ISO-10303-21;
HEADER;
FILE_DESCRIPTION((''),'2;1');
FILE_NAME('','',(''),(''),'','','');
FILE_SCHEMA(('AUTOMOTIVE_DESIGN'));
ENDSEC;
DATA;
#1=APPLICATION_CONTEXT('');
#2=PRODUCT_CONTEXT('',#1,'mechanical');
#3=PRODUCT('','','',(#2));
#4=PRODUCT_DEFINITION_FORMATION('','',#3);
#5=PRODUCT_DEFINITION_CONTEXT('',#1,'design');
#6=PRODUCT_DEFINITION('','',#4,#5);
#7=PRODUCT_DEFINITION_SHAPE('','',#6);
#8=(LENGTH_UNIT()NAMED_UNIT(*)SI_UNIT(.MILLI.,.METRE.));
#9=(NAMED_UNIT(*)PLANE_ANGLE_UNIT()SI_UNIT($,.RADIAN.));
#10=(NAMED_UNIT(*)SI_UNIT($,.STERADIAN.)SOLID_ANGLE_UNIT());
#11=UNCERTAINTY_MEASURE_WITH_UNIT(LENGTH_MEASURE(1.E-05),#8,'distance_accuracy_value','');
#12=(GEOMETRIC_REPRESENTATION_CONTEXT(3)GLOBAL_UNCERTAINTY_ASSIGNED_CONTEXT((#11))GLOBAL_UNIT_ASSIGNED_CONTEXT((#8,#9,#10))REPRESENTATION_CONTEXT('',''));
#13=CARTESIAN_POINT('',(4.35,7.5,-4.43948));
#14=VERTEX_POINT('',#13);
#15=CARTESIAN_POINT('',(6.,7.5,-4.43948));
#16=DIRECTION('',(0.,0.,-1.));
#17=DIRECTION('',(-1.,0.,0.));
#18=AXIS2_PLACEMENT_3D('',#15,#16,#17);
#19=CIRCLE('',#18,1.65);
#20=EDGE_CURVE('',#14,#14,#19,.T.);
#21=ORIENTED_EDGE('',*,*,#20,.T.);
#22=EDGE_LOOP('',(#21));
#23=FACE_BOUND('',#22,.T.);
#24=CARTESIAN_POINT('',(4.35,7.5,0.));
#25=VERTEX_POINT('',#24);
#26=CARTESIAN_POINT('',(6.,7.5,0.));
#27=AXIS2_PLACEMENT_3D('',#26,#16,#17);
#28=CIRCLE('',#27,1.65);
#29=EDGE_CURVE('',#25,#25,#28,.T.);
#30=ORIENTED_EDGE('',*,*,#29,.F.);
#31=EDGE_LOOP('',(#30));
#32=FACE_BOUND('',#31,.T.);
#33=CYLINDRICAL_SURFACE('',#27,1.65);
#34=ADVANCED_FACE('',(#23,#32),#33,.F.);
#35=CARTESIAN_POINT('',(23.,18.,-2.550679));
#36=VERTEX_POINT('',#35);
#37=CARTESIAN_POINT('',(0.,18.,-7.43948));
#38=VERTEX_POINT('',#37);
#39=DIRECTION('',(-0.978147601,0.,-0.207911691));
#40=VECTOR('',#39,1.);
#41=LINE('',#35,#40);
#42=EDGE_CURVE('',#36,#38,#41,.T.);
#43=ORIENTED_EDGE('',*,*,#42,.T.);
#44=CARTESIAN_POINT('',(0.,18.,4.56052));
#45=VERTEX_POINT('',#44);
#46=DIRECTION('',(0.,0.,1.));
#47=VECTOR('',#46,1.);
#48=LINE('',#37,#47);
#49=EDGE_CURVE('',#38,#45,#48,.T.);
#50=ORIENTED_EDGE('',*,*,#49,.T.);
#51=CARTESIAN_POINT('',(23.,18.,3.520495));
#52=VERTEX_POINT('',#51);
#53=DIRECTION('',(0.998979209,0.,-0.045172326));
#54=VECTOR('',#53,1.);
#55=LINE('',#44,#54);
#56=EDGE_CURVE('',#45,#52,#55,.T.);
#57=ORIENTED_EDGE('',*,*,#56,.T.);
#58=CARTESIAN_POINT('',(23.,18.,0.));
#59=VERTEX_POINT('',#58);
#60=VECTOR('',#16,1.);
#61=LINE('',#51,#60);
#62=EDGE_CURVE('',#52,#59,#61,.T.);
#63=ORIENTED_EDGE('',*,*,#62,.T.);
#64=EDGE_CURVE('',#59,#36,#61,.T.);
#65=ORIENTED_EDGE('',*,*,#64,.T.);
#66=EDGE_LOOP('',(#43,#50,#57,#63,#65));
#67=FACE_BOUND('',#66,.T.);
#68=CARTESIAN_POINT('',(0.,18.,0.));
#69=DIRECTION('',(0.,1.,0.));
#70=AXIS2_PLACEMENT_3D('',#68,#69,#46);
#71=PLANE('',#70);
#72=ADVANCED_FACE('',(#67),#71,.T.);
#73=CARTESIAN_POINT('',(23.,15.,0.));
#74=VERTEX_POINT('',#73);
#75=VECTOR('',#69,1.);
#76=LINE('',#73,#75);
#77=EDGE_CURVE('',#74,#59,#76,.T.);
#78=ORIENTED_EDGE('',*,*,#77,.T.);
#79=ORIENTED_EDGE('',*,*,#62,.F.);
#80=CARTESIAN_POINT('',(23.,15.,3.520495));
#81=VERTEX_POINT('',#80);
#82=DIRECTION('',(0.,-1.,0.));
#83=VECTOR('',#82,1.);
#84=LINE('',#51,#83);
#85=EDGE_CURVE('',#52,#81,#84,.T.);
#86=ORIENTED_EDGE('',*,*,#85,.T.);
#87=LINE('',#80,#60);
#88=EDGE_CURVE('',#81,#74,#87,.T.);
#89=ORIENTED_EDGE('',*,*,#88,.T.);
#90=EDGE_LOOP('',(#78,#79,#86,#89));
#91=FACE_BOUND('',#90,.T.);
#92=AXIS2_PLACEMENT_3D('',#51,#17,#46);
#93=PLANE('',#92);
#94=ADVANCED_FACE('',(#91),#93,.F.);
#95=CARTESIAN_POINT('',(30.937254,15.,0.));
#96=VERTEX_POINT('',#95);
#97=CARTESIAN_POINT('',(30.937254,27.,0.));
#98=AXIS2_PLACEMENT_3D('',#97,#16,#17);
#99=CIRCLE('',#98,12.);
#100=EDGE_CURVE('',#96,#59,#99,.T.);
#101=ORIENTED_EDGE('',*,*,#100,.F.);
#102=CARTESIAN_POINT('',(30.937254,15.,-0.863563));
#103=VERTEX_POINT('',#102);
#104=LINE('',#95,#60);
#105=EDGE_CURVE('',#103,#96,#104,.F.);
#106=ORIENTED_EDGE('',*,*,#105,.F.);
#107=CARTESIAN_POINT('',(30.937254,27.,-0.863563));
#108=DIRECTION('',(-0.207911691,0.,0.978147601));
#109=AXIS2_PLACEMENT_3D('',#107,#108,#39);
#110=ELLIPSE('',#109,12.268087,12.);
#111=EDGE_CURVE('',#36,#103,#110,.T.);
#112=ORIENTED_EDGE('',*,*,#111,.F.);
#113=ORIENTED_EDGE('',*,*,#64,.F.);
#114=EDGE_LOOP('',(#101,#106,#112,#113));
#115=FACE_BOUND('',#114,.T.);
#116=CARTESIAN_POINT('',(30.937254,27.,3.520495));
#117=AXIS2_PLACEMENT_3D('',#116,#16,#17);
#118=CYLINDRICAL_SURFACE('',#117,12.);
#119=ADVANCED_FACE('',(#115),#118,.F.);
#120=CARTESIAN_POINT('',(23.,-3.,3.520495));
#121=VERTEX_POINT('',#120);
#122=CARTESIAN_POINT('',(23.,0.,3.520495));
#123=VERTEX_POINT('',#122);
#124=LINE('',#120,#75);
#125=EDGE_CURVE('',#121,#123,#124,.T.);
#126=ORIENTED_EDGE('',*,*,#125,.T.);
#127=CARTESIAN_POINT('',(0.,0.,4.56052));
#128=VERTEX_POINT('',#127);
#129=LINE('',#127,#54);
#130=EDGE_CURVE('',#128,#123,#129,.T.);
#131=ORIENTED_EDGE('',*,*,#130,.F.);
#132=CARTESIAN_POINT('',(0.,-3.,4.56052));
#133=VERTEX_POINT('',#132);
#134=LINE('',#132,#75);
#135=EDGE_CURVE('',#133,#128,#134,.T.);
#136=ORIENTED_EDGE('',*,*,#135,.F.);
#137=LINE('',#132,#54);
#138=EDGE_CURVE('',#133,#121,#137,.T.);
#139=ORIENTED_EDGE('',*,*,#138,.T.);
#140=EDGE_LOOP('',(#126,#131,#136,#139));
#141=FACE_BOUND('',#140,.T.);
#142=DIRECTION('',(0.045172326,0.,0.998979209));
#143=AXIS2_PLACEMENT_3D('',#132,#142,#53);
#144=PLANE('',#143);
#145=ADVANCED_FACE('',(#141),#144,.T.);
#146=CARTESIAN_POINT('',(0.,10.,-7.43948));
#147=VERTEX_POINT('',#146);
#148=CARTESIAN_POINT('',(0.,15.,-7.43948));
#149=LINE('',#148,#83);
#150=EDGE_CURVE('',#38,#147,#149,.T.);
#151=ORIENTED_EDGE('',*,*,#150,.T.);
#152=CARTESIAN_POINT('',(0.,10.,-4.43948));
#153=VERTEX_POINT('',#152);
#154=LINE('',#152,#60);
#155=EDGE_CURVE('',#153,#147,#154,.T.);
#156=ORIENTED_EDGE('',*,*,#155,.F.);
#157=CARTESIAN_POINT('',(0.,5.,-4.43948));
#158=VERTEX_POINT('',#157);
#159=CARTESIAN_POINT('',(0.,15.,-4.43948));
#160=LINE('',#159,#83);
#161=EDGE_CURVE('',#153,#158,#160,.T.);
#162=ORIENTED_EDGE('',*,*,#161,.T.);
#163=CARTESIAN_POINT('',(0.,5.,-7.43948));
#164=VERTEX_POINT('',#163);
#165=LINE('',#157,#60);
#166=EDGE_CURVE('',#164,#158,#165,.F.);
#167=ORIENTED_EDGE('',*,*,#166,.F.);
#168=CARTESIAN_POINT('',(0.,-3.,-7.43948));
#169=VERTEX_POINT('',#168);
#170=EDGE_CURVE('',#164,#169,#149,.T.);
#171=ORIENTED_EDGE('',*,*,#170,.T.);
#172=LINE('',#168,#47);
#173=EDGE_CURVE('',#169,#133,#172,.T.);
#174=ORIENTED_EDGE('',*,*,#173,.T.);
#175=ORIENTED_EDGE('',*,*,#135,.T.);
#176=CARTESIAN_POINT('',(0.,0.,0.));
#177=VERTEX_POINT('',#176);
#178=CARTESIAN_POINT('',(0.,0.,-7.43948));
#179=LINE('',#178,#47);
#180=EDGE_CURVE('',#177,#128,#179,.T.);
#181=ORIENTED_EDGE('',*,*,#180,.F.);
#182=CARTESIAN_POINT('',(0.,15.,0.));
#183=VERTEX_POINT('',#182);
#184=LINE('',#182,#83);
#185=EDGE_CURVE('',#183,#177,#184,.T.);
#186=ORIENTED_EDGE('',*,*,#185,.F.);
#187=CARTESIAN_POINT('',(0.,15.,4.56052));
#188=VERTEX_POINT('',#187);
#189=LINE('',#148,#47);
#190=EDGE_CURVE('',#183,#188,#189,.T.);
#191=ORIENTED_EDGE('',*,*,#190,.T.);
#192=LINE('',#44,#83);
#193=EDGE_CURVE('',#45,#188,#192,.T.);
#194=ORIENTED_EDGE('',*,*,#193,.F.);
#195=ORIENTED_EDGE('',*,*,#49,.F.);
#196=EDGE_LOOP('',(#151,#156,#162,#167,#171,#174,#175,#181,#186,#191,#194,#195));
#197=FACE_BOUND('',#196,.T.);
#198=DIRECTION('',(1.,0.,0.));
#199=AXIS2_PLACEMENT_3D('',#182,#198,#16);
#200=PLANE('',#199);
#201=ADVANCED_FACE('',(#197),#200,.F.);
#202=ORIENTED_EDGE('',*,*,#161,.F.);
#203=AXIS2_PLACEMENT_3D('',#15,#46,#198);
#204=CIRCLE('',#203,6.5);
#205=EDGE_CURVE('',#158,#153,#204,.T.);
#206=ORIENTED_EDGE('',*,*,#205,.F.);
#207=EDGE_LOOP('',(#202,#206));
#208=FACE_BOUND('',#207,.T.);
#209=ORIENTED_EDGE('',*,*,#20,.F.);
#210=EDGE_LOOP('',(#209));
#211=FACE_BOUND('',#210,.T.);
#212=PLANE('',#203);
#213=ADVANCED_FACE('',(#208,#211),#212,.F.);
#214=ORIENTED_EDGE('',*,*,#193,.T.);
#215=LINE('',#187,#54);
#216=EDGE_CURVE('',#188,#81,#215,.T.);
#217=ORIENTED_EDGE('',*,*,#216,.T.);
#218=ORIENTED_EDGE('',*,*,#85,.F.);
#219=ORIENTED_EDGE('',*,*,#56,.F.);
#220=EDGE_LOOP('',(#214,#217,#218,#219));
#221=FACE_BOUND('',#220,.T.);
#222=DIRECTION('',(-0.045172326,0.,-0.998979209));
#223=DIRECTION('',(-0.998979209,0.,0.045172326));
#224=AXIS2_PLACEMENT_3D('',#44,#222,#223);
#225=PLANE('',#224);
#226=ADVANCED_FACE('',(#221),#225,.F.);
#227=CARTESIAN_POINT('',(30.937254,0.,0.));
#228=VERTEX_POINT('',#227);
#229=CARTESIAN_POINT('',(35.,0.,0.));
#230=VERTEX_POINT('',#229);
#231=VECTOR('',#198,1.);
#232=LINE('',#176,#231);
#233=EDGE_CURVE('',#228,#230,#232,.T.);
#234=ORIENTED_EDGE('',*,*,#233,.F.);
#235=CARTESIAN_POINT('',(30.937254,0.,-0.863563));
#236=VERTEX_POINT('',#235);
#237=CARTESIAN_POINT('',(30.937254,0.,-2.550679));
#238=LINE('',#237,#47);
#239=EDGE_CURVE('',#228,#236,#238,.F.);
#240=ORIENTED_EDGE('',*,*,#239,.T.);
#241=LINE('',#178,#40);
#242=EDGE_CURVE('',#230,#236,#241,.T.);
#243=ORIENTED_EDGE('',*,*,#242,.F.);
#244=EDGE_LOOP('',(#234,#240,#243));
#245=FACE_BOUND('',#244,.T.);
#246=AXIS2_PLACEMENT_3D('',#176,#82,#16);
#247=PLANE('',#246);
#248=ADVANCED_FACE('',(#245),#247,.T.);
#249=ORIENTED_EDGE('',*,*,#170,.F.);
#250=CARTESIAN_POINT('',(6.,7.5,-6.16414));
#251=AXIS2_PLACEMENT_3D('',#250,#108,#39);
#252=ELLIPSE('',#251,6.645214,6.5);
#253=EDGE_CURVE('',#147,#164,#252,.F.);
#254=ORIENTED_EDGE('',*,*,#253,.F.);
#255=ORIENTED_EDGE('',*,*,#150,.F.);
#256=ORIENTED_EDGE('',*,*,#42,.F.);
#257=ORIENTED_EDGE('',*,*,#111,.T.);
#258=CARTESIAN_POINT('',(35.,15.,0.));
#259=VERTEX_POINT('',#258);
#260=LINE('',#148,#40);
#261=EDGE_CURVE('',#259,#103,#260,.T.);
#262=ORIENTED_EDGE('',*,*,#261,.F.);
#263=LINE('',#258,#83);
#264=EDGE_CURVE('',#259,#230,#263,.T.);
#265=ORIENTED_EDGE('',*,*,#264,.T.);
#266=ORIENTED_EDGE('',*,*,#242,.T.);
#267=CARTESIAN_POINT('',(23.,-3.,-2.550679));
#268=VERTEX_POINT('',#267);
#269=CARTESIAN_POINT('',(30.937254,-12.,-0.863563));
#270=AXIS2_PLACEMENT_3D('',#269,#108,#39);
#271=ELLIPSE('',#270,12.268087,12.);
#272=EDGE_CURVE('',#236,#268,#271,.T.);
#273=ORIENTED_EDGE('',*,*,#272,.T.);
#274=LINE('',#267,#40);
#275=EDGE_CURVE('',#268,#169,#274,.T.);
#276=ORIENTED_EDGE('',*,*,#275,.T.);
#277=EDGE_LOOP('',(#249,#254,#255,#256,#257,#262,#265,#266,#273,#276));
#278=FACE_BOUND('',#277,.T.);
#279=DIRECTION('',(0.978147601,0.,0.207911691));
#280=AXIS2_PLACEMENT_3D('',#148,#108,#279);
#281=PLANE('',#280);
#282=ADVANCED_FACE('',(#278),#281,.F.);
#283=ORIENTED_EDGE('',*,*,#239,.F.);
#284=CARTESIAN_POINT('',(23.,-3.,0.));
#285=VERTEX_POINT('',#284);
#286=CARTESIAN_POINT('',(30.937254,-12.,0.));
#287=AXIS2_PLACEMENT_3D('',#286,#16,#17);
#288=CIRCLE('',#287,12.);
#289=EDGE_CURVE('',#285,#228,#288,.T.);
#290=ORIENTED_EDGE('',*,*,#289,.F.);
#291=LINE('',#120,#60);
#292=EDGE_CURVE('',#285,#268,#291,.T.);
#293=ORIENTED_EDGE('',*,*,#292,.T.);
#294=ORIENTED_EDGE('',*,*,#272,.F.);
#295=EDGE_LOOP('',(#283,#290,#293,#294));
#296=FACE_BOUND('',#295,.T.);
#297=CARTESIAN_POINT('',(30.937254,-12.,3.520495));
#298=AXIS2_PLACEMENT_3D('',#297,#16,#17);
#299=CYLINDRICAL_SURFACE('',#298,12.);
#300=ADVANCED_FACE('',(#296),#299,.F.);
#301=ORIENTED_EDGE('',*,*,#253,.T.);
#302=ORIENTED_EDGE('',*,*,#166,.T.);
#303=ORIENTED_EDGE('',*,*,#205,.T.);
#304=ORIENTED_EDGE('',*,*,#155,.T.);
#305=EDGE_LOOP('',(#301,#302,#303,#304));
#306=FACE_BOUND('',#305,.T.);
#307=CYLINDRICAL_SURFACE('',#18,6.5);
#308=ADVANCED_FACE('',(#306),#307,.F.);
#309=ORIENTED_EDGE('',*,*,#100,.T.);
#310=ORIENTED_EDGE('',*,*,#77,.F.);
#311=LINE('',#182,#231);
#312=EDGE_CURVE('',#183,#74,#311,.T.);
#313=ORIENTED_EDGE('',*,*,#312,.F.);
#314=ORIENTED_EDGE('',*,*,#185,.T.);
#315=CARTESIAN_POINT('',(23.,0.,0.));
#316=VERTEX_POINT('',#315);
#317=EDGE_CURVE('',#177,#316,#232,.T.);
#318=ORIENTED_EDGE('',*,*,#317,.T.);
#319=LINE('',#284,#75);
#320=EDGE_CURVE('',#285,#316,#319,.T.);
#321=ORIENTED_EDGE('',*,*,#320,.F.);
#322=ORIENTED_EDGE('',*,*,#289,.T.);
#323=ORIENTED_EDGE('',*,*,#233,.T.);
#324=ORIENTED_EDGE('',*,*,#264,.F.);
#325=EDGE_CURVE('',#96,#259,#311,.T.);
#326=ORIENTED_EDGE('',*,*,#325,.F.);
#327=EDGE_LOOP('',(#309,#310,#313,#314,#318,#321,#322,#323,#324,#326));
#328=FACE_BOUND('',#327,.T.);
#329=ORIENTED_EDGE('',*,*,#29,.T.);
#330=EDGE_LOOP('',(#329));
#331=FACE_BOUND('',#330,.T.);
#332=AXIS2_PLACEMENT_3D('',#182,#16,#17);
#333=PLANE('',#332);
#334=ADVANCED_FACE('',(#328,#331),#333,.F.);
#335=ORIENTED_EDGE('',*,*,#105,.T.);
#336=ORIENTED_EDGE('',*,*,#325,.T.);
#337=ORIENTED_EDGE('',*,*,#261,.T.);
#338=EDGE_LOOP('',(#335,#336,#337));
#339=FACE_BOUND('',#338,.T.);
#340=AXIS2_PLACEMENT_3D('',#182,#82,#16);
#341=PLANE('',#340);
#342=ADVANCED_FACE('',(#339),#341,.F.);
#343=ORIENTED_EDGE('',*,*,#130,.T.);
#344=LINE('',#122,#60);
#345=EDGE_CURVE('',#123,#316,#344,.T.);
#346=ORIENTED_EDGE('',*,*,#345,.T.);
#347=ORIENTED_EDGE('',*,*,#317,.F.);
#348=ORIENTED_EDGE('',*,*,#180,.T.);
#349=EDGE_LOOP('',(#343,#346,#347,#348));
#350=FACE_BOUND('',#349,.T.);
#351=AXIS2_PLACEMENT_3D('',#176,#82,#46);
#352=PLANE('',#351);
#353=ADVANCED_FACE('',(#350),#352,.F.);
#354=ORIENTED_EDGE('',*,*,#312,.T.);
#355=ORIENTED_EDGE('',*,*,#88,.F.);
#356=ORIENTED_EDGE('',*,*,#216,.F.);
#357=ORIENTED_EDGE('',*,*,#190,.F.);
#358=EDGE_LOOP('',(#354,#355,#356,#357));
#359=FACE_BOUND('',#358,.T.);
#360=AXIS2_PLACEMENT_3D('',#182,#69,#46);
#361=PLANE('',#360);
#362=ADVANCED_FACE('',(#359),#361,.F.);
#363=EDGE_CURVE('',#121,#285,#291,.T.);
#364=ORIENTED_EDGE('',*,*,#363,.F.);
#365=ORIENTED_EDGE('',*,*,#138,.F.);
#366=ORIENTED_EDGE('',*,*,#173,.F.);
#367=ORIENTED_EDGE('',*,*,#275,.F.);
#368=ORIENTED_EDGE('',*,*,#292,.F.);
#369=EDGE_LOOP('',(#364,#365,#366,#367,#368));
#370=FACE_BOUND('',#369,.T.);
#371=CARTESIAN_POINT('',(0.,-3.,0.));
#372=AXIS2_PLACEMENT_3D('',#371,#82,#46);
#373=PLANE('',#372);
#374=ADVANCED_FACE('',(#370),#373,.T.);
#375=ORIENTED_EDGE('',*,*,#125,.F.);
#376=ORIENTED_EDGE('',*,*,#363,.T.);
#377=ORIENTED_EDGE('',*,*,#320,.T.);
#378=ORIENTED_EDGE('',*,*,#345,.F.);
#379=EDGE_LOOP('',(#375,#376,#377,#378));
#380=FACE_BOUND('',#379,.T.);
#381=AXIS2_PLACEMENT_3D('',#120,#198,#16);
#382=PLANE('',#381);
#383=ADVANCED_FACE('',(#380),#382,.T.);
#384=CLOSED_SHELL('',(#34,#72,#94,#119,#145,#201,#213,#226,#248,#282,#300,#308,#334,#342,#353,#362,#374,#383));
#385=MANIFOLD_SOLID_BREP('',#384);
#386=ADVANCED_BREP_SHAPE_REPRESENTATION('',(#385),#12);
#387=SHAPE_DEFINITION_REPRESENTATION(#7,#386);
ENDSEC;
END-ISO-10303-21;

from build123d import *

# Parameters (mm, degrees)
EXTRUDE_1_DEPTH     = 15
SKETCH_3_R          = 6.5
CUT_EXTRUDE_2_DEPTH = 3
SKETCH_4_R          = 1.65
CUT_EXTRUDE_3_DEPTH = 39.336783637
EXTRUDE_2_DEPTH     = 3
FILLET_1_R          = 12


with BuildPart() as part:
    # 草图2 → 凸台-拉伸1 (new body)
    with BuildSketch(Plane(origin=(0, 0, 0), x_dir=(1, 0, 0), z_dir=(0, 1, 0))):
        Polygon((0, 0), (35, 0), (0, 7.439479658), align=None)
    extrude(amount=EXTRUDE_1_DEPTH)

    # 草图3 → 切除-拉伸2 (cut)
    with BuildSketch(Plane.XY.offset(-7.439479658)):
        with Locations((6, 7.5)):
            Circle(SKETCH_3_R)
    extrude(amount=CUT_EXTRUDE_2_DEPTH, mode=Mode.SUBTRACT)

    # 草图4 → 切除-拉伸3 (cut, through all)
    with BuildSketch(Plane(origin=(0, 0, -4.439479658), x_dir=(-1, 0, 0), z_dir=(0, 0, -1))):
        with Locations((-6, 7.5)):
            Circle(SKETCH_4_R)
    extrude(amount=-CUT_EXTRUDE_3_DEPTH, mode=Mode.SUBTRACT)

    # 草图6 → 凸台-拉伸2 (add)
    with BuildSketch(Plane(origin=(0, 15, 0), x_dir=(1, 0, 0), z_dir=(0, 1, 0))):
        Polygon((0, 7.439479658), (0, -4.560520342), (23, -3.520495202), (23, 2.55067874), align=None)
    extrude_2 = extrude(amount=EXTRUDE_2_DEPTH)

    # 镜向1: 凸台-拉伸2 across plane
    add(extrude_2.mirror(Plane(origin=(0, 7.5, 0), x_dir=(0, 0, 1), z_dir=(0, -1, 0))))

    # 圆角1
    # the kernel refuses this fillet: 12 mm, written as the material it adds along each edge
    with BuildSketch(Plane(origin=(23, 0, 0), x_dir=(0, -1, 0), z_dir=(0, 0, -1))) as fillet_1_piece_1_section:
        with BuildLine():
            CenterArc((12, -7.937253933), FILLET_1_R, 138.590377891, 41.409622109)
            Line((0, -7.937253933), (0, 0))
            Line((0, 0), (3, 0))
        make_face()
    fillet_1_piece_1 = extrude(amount=22.393813573, mode=Mode.PRIVATE)
    fillet_1_piece_1 = split(fillet_1_piece_1, bisect_by=Plane(origin=(26.786150339, -0.752577895, -1.745907642), z_dir=(-0.20791169081775981, 0, 0.9781476007338056)), keep=Keep.TOP, mode=Mode.PRIVATE)
    add(fillet_1_piece_1)
    with BuildSketch(Plane(origin=(23, 15, 0), x_dir=(0, 1, 0), z_dir=(0, 0, -1))) as fillet_1_piece_2_section:
        with BuildLine():
            CenterArc((12, 7.937253933), FILLET_1_R, 180, 41.409622109)
            Line((0, 7.937253933), (0, 0))
            Line((0, 0), (3, 0))
        make_face()
    fillet_1_piece_2 = extrude(amount=22.393813573, mode=Mode.PRIVATE)
    fillet_1_piece_2 = split(fillet_1_piece_2, bisect_by=Plane(origin=(26.786150339, 15.752577895, -1.745907642), z_dir=(-0.20791169081775981, 0, 0.9781476007338056)), keep=Keep.TOP, mode=Mode.PRIVATE)
    add(fillet_1_piece_2)


solid = part.part
